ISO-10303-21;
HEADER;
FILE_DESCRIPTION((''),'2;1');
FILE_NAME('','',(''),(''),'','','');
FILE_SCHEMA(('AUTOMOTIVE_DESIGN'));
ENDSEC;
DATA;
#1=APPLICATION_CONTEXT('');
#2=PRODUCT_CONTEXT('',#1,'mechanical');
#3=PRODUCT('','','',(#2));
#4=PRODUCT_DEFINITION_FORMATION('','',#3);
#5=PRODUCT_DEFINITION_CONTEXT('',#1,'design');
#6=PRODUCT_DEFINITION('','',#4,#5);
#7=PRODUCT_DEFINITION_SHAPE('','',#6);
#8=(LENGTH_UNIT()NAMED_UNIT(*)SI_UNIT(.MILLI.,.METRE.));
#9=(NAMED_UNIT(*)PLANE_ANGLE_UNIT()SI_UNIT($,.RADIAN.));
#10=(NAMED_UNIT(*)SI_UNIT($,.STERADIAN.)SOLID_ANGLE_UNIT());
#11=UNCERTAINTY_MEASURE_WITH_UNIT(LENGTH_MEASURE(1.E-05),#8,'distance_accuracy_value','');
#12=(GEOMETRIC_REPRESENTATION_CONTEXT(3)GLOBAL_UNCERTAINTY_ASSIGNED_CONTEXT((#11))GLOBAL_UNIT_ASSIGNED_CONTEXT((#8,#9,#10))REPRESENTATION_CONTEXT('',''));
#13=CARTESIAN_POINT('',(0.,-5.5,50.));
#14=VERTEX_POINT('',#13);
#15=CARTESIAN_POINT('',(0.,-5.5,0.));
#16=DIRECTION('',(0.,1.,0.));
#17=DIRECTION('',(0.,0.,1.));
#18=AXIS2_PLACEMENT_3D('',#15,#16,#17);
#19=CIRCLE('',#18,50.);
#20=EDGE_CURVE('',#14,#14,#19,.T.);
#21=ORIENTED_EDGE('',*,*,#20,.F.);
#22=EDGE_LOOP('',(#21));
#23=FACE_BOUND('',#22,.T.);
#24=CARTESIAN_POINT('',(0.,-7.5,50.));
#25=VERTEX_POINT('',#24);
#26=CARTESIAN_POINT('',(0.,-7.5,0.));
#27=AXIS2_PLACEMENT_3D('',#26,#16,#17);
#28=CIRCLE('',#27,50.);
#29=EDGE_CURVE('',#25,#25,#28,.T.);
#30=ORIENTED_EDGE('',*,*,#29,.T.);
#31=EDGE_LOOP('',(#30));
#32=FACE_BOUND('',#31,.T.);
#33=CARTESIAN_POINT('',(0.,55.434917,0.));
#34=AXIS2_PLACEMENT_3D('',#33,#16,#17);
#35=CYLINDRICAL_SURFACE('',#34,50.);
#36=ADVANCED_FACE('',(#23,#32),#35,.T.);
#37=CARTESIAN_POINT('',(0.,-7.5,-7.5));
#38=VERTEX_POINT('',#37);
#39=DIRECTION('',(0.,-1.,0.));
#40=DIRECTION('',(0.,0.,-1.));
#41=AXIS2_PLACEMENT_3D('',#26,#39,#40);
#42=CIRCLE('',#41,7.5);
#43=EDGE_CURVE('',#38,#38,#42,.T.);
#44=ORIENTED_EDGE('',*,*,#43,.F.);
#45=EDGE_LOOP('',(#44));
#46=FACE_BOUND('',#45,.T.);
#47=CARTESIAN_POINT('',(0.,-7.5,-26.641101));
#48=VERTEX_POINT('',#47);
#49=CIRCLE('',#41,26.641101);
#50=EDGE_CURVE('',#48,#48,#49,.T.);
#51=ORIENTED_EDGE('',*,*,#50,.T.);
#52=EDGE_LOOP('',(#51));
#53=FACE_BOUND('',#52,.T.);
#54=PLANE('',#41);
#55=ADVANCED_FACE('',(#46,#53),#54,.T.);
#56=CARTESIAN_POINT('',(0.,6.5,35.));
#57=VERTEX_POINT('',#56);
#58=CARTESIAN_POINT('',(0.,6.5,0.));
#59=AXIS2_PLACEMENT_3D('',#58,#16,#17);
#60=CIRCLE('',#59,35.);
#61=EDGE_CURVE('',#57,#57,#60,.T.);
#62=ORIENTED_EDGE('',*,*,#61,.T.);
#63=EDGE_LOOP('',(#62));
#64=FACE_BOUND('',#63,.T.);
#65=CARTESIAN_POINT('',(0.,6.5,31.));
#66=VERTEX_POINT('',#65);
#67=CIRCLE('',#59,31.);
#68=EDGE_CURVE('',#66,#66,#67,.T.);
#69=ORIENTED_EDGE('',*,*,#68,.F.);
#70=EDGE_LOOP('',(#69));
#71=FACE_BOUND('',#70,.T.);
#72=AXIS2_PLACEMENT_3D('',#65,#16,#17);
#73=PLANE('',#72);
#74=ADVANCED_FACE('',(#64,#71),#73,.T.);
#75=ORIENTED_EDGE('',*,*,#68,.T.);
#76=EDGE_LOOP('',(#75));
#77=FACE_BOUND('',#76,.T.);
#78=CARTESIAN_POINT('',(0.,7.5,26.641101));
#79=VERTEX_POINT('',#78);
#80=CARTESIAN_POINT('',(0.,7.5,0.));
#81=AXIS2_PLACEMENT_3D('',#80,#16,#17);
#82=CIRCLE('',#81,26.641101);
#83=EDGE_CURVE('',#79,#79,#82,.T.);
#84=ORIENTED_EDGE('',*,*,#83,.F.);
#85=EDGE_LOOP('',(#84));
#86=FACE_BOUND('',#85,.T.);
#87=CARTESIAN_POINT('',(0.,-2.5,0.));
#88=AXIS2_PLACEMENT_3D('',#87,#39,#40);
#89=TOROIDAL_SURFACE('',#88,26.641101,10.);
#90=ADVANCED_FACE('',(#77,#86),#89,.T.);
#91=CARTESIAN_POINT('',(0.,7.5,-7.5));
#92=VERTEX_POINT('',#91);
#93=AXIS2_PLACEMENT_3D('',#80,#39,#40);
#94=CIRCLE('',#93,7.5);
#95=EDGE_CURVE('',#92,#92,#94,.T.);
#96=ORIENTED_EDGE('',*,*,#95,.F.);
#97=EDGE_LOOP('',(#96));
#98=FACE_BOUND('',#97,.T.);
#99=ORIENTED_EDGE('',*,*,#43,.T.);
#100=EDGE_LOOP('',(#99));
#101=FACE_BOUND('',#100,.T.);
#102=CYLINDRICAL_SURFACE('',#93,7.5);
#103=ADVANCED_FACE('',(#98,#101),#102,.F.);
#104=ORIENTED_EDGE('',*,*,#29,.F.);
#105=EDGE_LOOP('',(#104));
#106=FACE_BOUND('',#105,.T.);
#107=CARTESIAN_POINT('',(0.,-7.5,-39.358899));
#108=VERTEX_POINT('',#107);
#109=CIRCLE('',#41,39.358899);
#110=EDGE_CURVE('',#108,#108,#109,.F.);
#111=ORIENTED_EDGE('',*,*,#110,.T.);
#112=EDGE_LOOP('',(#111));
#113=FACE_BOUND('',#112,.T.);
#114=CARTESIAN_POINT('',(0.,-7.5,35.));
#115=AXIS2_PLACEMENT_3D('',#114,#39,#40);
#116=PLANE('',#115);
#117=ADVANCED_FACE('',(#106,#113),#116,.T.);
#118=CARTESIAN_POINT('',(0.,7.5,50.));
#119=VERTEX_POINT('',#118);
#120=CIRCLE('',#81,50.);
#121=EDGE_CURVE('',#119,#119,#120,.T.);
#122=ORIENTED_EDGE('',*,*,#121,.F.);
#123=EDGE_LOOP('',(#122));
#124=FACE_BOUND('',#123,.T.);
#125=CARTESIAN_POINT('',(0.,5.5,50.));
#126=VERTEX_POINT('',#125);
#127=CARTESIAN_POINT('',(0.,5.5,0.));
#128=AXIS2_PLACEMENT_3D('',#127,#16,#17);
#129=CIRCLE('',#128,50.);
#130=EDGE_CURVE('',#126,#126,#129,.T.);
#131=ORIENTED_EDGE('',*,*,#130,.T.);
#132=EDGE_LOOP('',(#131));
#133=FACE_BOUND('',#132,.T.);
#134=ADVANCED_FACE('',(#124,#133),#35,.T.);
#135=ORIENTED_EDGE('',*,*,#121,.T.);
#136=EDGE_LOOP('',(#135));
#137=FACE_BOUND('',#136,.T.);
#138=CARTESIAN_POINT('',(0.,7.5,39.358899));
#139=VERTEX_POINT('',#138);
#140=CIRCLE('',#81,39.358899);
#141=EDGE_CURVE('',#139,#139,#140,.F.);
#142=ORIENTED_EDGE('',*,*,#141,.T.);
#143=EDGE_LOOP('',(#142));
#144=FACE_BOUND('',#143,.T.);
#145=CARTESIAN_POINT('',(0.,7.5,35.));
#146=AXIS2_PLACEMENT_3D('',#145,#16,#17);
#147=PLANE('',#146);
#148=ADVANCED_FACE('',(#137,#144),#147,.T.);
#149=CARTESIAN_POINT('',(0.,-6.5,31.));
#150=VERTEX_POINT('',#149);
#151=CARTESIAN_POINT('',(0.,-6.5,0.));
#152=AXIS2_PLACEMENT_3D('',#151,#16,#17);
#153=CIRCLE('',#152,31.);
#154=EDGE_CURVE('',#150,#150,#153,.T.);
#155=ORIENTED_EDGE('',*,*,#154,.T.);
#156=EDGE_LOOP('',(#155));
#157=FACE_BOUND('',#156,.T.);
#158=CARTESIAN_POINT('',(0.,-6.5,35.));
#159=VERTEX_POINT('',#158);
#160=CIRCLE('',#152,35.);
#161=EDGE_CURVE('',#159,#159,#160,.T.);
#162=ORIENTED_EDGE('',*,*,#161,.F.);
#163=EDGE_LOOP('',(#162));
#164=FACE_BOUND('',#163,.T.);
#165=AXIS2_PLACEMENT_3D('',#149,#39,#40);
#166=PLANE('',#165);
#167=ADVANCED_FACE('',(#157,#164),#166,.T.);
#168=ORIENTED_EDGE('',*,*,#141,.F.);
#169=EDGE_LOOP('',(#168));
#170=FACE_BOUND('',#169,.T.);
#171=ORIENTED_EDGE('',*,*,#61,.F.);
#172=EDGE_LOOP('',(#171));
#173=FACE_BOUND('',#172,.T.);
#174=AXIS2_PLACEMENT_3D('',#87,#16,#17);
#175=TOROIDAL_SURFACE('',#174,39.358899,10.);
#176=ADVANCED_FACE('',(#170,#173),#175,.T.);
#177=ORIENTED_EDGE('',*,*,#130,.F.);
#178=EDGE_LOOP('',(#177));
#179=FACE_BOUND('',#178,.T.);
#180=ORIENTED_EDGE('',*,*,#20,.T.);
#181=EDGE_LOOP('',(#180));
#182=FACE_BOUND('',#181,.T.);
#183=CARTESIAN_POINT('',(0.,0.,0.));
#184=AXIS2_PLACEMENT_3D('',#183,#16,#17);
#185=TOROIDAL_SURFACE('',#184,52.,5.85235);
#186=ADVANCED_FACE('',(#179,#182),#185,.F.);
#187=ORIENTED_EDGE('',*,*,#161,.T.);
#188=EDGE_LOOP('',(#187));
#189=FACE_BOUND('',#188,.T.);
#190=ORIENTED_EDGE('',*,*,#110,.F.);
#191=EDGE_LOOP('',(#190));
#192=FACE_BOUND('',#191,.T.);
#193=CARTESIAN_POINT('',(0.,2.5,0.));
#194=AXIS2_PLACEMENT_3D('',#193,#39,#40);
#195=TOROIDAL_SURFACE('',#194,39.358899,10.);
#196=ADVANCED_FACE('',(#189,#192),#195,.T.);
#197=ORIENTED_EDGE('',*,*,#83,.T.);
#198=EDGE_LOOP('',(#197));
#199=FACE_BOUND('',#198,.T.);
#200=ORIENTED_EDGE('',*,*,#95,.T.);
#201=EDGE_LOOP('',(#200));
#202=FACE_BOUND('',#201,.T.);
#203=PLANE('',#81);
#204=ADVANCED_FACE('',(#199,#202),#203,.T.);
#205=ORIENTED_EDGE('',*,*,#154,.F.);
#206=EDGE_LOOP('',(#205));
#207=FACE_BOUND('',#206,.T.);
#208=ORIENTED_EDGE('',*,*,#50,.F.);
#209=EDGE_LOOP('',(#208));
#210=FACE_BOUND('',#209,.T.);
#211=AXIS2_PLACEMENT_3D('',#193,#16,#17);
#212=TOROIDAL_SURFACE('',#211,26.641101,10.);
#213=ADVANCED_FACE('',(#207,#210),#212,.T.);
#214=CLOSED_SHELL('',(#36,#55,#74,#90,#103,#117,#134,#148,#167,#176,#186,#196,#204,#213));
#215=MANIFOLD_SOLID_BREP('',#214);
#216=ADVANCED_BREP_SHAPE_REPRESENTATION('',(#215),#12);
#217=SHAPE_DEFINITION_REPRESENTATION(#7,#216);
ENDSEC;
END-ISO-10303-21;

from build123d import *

# Parameters (mm, degrees)
FILLET1_R          = 10
FILLET2_R          = 10
FILLET3_R          = 10
FILLET4_R          = 10
SKETCH3_R          = 7.5
CUT_EXTRUDE1_DEPTH = 73.284161495


with BuildPart() as part:
    # Sketch2 → Revolve1 (revolve)
    with BuildSketch(Plane(origin=(0, 0, 0), x_dir=(0, 0, -1), z_dir=(1, 0, 0))):
        with BuildLine():
            Line((0, 7.5), (-31, 7.5))
            Line((-31, 7.5), (-31, 6.5))
            Line((-31, 6.5), (-35, 6.5))
            Line((-35, 6.5), (-35, 7.5))
            Line((-35, 7.5), (-50, 7.5))
            Line((-50, 7.5), (-50, 5.5))
            ThreePointArc((-50, 5.5), (-46.147650045, 0), (-50, -5.5))
            Line((-50, -5.5), (-50, -7.5))
            Line((-50, -7.5), (-35, -7.5))
            Line((-35, -7.5), (-35, -6.5))
            Line((-35, -6.5), (-31, -6.5))
            Line((-31, -6.5), (-31, -7.5))
            Line((-31, -7.5), (0, -7.5))
            Line((0, -7.5), (0, 7.5))
        make_face()
    revolve(axis=Axis((0, 55.434917487, 0), (0, -1, 0)))

    # Fillet1
    # the kernel refuses this fillet: 10 mm, written as the material it takes off along each edge
    with BuildSketch(Plane(origin=(0, 7.5, 0), x_dir=(0, 0, 1), z_dir=(1, 0, 0))) as fillet1_piece_1:
        with BuildLine():
            CenterArc((39.358898944, 10), FILLET1_R, 244.158067237, 25.841932763)
            Line((39.358898944, 0), (39.358898944, -0.2))
            Line((39.358898944, -0.2), (35, -0.2))
            Line((35, -0.2), (34.8, 0))
            ThreePointArc((34.8, 0), (34.8, 0.5), (34.912822021, 0.82))
            Line((34.912822021, 0.82), (35, 1))
        make_face()
    revolve(axis=Axis((0, 7.5, 0), (0, -1, 0)), mode=Mode.SUBTRACT)

    # Fillet2
    # the kernel refuses this fillet: 10 mm, written as the material it takes off along each edge
    with BuildSketch(Plane(origin=(0, 7.5, 0), x_dir=(0, 0, 1), z_dir=(1, 0, 0))) as fillet2_piece_1:
        with BuildLine():
            CenterArc((26.641101056, 10), FILLET2_R, 270, 25.841932763)
            Line((26.641101056, 0), (26.641101056, -0.2))
            Line((26.641101056, -0.2), (31, -0.2))
            Line((31, -0.2), (31.2, 0))
            ThreePointArc((31.2, 0), (31.2, 0.5), (31.087177979, 0.82))
            Line((31.087177979, 0.82), (31, 1))
        make_face()
    revolve(axis=Axis((0, 7.5, 0), (0, -1, 0)), mode=Mode.SUBTRACT)

    # Fillet3
    # the kernel refuses this fillet: 10 mm, written as the material it takes off along each edge
    with BuildSketch(Plane(origin=(0, -7.5, 0), x_dir=(0, 0, 1), z_dir=(1, 0, 0))) as fillet3_piece_1:
        with BuildLine():
            CenterArc((39.358898944, -10), FILLET3_R, 90, 25.841932763)
            Line((35, -1), (34.912822021, -0.82))
            ThreePointArc((34.912822021, -0.82), (34.8, -0.5), (34.8, 0))
            Line((34.8, 0), (35, 0.2))
            Line((35, 0.2), (39.358898944, 0.2))
            Line((39.358898944, 0.2), (39.358898944, 0))
        make_face()
    revolve(axis=Axis((0, -7.5, 0), (0, -1, 0)), mode=Mode.SUBTRACT)

    # Fillet4
    # the kernel refuses this fillet: 10 mm, written as the material it takes off along each edge
    with BuildSketch(Plane(origin=(0, -7.5, 0), x_dir=(0, 0, 1), z_dir=(1, 0, 0))) as fillet4_piece_1:
        with BuildLine():
            CenterArc((26.641101056, -10), FILLET4_R, 64.158067237, 25.841932763)
            Line((26.641101056, 0), (26.641101056, 0.2))
            Line((26.641101056, 0.2), (31, 0.2))
            Line((31, 0.2), (31.2, 0))
            ThreePointArc((31.2, 0), (31.2, -0.5), (31.087177979, -0.82))
            Line((31.087177979, -0.82), (31, -1))
        make_face()
    revolve(axis=Axis((0, -7.5, 0), (0, -1, 0)), mode=Mode.SUBTRACT)

    # Sketch3 → Cut-Extrude1 (cut, through all)
    with BuildSketch(Plane.XZ.offset(7.5)):
        with Locations(Location((0, 0, 0), (0, 0, 270))):
            Circle(SKETCH3_R)
    extrude(amount=-CUT_EXTRUDE1_DEPTH, mode=Mode.SUBTRACT)


solid = part.part
